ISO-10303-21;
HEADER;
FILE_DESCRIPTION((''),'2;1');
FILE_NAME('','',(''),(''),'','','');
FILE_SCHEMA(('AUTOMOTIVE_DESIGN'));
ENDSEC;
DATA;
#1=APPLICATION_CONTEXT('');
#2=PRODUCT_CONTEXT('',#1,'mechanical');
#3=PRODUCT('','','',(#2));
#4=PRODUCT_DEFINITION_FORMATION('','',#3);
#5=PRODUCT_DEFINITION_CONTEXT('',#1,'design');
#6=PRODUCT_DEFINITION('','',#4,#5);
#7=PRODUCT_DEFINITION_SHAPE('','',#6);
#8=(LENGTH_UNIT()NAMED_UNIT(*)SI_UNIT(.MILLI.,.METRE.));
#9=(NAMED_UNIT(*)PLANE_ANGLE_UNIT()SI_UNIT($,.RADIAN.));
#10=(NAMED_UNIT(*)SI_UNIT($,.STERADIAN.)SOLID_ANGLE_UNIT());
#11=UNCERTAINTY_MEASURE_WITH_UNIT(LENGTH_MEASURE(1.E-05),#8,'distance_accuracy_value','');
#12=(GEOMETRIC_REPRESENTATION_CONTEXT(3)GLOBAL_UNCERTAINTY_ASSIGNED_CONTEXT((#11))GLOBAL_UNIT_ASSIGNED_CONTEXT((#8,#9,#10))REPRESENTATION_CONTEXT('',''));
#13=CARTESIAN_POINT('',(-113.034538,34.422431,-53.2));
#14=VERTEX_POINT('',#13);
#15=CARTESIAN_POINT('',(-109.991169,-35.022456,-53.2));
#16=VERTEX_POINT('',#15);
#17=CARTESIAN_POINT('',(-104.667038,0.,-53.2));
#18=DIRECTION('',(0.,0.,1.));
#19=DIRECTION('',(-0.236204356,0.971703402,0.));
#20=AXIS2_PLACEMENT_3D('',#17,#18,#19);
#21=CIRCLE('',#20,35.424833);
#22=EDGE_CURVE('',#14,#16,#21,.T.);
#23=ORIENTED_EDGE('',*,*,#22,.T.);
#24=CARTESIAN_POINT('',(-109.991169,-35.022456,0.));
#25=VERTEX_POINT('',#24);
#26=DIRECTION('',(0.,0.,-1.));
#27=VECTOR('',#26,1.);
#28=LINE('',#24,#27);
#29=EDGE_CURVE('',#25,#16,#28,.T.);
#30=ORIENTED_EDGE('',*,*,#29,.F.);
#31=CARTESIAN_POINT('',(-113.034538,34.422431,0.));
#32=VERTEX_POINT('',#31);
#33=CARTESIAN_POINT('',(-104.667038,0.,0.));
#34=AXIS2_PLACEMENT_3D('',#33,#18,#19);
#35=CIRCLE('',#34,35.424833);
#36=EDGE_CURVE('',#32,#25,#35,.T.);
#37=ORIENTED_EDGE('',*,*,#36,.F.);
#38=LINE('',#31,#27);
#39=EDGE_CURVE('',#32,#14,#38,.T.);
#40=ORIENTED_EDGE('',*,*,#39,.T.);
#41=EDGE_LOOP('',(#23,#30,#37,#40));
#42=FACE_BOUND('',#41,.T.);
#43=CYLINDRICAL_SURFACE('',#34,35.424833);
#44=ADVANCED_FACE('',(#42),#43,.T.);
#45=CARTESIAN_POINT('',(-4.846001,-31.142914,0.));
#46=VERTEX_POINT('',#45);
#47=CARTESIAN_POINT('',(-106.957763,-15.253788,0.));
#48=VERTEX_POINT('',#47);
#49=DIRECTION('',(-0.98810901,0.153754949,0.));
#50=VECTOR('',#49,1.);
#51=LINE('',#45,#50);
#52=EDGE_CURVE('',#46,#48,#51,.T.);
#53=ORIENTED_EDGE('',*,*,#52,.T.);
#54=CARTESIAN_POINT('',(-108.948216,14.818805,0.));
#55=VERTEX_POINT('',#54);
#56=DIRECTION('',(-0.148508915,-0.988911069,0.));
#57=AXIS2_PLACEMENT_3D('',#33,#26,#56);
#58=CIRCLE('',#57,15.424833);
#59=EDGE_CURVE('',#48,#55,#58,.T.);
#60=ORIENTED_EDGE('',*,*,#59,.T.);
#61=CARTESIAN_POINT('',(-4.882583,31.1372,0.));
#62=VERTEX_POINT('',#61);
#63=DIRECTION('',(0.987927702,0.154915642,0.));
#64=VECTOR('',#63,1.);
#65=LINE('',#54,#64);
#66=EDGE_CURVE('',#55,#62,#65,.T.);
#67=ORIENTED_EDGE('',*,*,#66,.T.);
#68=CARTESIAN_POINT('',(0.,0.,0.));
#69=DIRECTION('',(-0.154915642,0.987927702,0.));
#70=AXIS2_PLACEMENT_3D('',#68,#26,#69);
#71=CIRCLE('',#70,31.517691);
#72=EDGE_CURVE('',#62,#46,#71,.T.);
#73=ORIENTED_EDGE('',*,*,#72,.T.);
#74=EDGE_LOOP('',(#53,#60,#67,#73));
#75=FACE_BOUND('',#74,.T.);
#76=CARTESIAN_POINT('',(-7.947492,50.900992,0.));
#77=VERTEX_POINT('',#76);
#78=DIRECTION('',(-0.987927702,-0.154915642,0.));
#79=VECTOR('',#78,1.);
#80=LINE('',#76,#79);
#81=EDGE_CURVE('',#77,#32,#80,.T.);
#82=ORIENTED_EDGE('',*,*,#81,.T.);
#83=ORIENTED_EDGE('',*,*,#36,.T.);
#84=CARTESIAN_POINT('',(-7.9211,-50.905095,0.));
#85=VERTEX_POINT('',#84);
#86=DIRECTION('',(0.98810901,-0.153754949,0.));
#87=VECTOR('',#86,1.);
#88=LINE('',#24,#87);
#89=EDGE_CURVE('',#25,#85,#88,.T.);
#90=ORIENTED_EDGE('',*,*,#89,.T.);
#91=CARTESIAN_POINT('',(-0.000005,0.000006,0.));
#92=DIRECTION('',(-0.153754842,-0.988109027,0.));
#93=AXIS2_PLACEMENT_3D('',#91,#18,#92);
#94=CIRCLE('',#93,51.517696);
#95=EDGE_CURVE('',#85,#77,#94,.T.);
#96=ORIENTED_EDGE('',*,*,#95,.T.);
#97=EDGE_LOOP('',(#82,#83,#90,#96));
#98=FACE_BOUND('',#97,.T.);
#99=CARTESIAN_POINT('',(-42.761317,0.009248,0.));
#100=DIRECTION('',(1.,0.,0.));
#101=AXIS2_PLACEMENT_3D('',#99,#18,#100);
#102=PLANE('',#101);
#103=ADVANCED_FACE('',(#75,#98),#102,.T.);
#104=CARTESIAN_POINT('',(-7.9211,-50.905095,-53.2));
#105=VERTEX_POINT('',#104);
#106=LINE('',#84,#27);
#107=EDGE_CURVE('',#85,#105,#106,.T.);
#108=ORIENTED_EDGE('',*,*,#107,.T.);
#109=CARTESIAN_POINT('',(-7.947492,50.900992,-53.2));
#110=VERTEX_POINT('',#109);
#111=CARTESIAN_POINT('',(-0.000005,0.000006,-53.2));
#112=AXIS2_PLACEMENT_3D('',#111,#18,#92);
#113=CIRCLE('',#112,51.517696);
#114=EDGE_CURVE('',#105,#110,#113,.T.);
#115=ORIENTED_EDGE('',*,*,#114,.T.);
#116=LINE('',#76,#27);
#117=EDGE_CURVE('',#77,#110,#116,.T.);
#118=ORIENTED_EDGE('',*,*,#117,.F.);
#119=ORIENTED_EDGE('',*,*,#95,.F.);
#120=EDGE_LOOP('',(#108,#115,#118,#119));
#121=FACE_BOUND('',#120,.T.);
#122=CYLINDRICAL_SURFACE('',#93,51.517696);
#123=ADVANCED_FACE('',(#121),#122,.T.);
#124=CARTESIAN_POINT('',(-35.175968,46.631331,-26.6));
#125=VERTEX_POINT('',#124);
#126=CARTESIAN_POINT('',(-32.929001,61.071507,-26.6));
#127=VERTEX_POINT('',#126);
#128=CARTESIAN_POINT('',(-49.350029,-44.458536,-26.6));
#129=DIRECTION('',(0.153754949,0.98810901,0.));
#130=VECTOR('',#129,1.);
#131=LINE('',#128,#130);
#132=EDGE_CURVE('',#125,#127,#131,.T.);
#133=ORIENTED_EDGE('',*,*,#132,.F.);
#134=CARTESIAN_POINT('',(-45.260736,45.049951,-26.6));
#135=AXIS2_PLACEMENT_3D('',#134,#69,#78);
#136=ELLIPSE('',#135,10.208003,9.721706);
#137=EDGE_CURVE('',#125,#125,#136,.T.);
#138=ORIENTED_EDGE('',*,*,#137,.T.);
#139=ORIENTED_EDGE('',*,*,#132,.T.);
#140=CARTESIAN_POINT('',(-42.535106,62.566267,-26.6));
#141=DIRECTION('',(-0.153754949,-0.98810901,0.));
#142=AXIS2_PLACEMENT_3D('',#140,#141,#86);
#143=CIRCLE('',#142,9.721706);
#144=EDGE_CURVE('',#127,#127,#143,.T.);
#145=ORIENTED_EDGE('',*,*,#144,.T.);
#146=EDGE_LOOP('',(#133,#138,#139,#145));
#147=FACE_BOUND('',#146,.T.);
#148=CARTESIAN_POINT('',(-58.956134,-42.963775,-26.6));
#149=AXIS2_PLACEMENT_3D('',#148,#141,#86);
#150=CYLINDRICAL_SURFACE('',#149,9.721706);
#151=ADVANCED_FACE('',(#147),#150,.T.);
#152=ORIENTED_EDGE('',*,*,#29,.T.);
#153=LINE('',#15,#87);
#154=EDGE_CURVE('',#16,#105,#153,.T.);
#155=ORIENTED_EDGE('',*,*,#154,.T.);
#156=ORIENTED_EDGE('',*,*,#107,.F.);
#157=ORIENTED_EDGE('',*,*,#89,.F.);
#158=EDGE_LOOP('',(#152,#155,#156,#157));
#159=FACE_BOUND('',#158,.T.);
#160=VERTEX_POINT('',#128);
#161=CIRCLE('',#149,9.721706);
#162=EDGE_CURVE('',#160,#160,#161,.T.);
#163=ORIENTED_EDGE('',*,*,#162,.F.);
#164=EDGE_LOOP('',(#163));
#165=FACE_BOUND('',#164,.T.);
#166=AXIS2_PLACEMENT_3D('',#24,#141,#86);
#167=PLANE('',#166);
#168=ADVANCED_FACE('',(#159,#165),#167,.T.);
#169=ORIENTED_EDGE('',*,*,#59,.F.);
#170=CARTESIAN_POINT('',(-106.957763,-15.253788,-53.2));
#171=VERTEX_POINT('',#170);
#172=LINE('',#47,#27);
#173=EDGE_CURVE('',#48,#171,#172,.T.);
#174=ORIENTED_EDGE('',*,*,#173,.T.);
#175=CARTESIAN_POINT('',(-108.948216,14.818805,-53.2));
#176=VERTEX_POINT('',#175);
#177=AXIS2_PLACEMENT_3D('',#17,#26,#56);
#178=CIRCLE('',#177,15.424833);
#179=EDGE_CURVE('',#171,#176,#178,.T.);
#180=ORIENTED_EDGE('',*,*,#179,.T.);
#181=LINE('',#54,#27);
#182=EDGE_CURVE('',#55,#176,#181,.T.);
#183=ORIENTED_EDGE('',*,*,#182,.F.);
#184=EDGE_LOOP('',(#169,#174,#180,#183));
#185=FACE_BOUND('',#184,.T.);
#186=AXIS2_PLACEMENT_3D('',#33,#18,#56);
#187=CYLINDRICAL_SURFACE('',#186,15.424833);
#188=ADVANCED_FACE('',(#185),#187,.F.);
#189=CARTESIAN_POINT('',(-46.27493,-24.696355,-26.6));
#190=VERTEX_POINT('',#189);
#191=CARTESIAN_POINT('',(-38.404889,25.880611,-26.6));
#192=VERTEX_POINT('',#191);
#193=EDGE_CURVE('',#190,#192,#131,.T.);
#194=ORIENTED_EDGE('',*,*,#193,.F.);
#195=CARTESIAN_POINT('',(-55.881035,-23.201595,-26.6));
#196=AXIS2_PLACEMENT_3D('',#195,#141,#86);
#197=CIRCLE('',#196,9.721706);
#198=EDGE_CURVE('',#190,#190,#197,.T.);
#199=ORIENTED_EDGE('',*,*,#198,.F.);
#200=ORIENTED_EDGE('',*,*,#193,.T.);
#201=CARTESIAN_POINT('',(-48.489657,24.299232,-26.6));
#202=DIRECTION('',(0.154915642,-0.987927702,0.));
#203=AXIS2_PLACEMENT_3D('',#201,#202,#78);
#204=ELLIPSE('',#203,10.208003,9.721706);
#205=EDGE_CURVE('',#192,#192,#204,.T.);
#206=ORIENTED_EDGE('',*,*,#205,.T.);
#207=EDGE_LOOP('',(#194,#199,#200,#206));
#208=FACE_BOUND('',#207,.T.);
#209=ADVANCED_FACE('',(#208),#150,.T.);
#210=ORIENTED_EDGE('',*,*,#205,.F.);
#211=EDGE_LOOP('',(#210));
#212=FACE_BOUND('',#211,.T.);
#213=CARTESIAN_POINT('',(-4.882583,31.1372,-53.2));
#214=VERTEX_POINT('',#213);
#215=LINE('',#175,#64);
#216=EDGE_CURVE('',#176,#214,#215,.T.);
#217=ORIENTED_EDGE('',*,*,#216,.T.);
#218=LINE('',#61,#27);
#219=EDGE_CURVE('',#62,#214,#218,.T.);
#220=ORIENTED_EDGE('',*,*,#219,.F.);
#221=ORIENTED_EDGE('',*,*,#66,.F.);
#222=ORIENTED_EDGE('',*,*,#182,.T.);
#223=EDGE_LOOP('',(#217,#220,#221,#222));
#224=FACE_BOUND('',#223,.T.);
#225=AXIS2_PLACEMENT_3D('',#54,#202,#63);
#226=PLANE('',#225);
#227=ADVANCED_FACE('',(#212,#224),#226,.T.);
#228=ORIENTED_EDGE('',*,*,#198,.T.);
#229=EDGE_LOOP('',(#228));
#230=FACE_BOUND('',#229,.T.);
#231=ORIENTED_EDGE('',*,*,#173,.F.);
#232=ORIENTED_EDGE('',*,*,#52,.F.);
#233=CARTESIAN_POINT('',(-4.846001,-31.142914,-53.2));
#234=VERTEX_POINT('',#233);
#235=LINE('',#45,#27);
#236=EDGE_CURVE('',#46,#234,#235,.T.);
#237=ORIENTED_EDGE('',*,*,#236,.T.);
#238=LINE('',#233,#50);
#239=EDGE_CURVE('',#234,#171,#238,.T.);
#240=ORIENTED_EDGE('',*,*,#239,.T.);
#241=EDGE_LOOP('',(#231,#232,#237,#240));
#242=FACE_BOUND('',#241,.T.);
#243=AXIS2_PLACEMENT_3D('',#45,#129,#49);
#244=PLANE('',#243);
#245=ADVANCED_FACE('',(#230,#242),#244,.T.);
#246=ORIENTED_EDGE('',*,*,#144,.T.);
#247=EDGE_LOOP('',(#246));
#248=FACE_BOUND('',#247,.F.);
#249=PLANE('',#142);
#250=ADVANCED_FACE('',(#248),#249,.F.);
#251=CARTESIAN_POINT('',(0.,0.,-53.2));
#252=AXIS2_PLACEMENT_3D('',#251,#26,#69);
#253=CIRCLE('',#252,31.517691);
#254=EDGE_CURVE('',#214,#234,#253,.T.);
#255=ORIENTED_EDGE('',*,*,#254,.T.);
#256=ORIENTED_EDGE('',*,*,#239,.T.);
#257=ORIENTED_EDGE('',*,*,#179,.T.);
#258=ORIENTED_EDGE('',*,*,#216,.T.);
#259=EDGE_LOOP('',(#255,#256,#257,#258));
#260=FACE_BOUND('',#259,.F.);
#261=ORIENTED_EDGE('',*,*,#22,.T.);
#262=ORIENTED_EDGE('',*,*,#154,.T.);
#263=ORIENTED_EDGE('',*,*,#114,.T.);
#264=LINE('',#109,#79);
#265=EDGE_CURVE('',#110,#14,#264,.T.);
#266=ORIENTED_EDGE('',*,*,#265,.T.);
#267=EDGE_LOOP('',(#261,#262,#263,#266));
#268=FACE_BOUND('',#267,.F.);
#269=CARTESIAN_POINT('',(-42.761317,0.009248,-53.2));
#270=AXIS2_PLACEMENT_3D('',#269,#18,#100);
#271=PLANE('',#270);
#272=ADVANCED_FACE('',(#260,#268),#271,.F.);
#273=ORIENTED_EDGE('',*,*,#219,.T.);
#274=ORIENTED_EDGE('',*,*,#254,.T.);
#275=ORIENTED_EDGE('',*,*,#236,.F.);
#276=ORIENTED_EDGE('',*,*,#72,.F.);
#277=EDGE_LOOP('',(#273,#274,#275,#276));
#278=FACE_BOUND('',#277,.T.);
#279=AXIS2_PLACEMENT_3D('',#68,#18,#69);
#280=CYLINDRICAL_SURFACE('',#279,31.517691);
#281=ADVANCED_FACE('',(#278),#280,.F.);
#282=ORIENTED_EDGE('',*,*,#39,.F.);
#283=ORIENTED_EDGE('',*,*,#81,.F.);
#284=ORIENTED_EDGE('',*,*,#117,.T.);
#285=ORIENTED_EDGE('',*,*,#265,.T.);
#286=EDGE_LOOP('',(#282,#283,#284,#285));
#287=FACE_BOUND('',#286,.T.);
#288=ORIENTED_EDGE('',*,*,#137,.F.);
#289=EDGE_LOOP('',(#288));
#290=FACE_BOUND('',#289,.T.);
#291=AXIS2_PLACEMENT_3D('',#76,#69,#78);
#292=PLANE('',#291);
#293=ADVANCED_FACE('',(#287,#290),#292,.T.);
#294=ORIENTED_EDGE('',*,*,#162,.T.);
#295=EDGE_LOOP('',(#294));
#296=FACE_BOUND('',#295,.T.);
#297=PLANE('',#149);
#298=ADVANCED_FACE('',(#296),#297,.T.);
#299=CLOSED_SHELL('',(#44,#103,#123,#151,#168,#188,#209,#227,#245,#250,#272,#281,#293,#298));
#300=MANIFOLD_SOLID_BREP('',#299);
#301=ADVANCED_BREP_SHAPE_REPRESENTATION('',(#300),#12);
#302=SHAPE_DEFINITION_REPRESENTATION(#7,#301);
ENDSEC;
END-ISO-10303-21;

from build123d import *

# Parameters (mm, degrees)
F1_DEPTH = 53.2
F2_R     = 9.7217056973
F3_DEPTH = 106.8
F4_DEPTH = 33.4


# Not quite as in the source:
# - ends of sketch curves that miss each other by under 0.0002 mm in the source are joined


with BuildPart() as f1:
    # F0 (on Top) → F1 (new body)
    with BuildSketch(Plane.XY):
        with BuildLine():
            Line((-7.9474923426, 50.9009919427), (-113.0345375872, 34.4224307572))
            ThreePointArc((-113.0345375872, 34.4224307572), (-140.0579018259, -1.5509775623), (-109.9911685167, -35.0224560031))
            Line((-109.9911685167, -35.0224560031), (-7.9210999462, -50.905094516))
            ThreePointArc((-7.9210999462, -50.905094516), (51.5176891338, 0.0133546718), (-7.9474923426, 50.9009919427))
        make_face()
        with BuildLine():
            ThreePointArc((-4.8825833147, 31.1371999002), (31.5176854276, 0.01851299), (-4.8460009605, -31.1429143167))
            Line((-4.8460009605, -31.1429143167), (-106.957762942, -15.2537880902))
            ThreePointArc((-106.957762942, -15.2537880902), (-120.0581940893, -1.0187143376), (-108.9482164871, 14.8188049967))
            Line((-108.9482164871, 14.8188049967), (-4.8825833147, 31.1371999002))
        make_face(mode=Mode.SUBTRACT)
    extrude(amount=-F1_DEPTH)

    # F2 (on face) → F3 (join)
    with BuildSketch(Plane(origin=(-7.9210999462, -50.905094516, 0), x_dir=(0.98810901, -0.1537549493, 0), z_dir=(-0.1537549493, -0.98810901, 0))):
        with Locations((-51.6491943406, -26.6)):
            Circle(F2_R)
    extrude(amount=-F3_DEPTH)

    # F4 (add): a face of the model
    f4_faces = [f1.faces().sort_by_distance(p)[0] for p in [
        (-42.5351056478, 62.5662670045, -26.6),
    ]]
    extrude(f4_faces, amount=-F4_DEPTH)


solid = f1.part
